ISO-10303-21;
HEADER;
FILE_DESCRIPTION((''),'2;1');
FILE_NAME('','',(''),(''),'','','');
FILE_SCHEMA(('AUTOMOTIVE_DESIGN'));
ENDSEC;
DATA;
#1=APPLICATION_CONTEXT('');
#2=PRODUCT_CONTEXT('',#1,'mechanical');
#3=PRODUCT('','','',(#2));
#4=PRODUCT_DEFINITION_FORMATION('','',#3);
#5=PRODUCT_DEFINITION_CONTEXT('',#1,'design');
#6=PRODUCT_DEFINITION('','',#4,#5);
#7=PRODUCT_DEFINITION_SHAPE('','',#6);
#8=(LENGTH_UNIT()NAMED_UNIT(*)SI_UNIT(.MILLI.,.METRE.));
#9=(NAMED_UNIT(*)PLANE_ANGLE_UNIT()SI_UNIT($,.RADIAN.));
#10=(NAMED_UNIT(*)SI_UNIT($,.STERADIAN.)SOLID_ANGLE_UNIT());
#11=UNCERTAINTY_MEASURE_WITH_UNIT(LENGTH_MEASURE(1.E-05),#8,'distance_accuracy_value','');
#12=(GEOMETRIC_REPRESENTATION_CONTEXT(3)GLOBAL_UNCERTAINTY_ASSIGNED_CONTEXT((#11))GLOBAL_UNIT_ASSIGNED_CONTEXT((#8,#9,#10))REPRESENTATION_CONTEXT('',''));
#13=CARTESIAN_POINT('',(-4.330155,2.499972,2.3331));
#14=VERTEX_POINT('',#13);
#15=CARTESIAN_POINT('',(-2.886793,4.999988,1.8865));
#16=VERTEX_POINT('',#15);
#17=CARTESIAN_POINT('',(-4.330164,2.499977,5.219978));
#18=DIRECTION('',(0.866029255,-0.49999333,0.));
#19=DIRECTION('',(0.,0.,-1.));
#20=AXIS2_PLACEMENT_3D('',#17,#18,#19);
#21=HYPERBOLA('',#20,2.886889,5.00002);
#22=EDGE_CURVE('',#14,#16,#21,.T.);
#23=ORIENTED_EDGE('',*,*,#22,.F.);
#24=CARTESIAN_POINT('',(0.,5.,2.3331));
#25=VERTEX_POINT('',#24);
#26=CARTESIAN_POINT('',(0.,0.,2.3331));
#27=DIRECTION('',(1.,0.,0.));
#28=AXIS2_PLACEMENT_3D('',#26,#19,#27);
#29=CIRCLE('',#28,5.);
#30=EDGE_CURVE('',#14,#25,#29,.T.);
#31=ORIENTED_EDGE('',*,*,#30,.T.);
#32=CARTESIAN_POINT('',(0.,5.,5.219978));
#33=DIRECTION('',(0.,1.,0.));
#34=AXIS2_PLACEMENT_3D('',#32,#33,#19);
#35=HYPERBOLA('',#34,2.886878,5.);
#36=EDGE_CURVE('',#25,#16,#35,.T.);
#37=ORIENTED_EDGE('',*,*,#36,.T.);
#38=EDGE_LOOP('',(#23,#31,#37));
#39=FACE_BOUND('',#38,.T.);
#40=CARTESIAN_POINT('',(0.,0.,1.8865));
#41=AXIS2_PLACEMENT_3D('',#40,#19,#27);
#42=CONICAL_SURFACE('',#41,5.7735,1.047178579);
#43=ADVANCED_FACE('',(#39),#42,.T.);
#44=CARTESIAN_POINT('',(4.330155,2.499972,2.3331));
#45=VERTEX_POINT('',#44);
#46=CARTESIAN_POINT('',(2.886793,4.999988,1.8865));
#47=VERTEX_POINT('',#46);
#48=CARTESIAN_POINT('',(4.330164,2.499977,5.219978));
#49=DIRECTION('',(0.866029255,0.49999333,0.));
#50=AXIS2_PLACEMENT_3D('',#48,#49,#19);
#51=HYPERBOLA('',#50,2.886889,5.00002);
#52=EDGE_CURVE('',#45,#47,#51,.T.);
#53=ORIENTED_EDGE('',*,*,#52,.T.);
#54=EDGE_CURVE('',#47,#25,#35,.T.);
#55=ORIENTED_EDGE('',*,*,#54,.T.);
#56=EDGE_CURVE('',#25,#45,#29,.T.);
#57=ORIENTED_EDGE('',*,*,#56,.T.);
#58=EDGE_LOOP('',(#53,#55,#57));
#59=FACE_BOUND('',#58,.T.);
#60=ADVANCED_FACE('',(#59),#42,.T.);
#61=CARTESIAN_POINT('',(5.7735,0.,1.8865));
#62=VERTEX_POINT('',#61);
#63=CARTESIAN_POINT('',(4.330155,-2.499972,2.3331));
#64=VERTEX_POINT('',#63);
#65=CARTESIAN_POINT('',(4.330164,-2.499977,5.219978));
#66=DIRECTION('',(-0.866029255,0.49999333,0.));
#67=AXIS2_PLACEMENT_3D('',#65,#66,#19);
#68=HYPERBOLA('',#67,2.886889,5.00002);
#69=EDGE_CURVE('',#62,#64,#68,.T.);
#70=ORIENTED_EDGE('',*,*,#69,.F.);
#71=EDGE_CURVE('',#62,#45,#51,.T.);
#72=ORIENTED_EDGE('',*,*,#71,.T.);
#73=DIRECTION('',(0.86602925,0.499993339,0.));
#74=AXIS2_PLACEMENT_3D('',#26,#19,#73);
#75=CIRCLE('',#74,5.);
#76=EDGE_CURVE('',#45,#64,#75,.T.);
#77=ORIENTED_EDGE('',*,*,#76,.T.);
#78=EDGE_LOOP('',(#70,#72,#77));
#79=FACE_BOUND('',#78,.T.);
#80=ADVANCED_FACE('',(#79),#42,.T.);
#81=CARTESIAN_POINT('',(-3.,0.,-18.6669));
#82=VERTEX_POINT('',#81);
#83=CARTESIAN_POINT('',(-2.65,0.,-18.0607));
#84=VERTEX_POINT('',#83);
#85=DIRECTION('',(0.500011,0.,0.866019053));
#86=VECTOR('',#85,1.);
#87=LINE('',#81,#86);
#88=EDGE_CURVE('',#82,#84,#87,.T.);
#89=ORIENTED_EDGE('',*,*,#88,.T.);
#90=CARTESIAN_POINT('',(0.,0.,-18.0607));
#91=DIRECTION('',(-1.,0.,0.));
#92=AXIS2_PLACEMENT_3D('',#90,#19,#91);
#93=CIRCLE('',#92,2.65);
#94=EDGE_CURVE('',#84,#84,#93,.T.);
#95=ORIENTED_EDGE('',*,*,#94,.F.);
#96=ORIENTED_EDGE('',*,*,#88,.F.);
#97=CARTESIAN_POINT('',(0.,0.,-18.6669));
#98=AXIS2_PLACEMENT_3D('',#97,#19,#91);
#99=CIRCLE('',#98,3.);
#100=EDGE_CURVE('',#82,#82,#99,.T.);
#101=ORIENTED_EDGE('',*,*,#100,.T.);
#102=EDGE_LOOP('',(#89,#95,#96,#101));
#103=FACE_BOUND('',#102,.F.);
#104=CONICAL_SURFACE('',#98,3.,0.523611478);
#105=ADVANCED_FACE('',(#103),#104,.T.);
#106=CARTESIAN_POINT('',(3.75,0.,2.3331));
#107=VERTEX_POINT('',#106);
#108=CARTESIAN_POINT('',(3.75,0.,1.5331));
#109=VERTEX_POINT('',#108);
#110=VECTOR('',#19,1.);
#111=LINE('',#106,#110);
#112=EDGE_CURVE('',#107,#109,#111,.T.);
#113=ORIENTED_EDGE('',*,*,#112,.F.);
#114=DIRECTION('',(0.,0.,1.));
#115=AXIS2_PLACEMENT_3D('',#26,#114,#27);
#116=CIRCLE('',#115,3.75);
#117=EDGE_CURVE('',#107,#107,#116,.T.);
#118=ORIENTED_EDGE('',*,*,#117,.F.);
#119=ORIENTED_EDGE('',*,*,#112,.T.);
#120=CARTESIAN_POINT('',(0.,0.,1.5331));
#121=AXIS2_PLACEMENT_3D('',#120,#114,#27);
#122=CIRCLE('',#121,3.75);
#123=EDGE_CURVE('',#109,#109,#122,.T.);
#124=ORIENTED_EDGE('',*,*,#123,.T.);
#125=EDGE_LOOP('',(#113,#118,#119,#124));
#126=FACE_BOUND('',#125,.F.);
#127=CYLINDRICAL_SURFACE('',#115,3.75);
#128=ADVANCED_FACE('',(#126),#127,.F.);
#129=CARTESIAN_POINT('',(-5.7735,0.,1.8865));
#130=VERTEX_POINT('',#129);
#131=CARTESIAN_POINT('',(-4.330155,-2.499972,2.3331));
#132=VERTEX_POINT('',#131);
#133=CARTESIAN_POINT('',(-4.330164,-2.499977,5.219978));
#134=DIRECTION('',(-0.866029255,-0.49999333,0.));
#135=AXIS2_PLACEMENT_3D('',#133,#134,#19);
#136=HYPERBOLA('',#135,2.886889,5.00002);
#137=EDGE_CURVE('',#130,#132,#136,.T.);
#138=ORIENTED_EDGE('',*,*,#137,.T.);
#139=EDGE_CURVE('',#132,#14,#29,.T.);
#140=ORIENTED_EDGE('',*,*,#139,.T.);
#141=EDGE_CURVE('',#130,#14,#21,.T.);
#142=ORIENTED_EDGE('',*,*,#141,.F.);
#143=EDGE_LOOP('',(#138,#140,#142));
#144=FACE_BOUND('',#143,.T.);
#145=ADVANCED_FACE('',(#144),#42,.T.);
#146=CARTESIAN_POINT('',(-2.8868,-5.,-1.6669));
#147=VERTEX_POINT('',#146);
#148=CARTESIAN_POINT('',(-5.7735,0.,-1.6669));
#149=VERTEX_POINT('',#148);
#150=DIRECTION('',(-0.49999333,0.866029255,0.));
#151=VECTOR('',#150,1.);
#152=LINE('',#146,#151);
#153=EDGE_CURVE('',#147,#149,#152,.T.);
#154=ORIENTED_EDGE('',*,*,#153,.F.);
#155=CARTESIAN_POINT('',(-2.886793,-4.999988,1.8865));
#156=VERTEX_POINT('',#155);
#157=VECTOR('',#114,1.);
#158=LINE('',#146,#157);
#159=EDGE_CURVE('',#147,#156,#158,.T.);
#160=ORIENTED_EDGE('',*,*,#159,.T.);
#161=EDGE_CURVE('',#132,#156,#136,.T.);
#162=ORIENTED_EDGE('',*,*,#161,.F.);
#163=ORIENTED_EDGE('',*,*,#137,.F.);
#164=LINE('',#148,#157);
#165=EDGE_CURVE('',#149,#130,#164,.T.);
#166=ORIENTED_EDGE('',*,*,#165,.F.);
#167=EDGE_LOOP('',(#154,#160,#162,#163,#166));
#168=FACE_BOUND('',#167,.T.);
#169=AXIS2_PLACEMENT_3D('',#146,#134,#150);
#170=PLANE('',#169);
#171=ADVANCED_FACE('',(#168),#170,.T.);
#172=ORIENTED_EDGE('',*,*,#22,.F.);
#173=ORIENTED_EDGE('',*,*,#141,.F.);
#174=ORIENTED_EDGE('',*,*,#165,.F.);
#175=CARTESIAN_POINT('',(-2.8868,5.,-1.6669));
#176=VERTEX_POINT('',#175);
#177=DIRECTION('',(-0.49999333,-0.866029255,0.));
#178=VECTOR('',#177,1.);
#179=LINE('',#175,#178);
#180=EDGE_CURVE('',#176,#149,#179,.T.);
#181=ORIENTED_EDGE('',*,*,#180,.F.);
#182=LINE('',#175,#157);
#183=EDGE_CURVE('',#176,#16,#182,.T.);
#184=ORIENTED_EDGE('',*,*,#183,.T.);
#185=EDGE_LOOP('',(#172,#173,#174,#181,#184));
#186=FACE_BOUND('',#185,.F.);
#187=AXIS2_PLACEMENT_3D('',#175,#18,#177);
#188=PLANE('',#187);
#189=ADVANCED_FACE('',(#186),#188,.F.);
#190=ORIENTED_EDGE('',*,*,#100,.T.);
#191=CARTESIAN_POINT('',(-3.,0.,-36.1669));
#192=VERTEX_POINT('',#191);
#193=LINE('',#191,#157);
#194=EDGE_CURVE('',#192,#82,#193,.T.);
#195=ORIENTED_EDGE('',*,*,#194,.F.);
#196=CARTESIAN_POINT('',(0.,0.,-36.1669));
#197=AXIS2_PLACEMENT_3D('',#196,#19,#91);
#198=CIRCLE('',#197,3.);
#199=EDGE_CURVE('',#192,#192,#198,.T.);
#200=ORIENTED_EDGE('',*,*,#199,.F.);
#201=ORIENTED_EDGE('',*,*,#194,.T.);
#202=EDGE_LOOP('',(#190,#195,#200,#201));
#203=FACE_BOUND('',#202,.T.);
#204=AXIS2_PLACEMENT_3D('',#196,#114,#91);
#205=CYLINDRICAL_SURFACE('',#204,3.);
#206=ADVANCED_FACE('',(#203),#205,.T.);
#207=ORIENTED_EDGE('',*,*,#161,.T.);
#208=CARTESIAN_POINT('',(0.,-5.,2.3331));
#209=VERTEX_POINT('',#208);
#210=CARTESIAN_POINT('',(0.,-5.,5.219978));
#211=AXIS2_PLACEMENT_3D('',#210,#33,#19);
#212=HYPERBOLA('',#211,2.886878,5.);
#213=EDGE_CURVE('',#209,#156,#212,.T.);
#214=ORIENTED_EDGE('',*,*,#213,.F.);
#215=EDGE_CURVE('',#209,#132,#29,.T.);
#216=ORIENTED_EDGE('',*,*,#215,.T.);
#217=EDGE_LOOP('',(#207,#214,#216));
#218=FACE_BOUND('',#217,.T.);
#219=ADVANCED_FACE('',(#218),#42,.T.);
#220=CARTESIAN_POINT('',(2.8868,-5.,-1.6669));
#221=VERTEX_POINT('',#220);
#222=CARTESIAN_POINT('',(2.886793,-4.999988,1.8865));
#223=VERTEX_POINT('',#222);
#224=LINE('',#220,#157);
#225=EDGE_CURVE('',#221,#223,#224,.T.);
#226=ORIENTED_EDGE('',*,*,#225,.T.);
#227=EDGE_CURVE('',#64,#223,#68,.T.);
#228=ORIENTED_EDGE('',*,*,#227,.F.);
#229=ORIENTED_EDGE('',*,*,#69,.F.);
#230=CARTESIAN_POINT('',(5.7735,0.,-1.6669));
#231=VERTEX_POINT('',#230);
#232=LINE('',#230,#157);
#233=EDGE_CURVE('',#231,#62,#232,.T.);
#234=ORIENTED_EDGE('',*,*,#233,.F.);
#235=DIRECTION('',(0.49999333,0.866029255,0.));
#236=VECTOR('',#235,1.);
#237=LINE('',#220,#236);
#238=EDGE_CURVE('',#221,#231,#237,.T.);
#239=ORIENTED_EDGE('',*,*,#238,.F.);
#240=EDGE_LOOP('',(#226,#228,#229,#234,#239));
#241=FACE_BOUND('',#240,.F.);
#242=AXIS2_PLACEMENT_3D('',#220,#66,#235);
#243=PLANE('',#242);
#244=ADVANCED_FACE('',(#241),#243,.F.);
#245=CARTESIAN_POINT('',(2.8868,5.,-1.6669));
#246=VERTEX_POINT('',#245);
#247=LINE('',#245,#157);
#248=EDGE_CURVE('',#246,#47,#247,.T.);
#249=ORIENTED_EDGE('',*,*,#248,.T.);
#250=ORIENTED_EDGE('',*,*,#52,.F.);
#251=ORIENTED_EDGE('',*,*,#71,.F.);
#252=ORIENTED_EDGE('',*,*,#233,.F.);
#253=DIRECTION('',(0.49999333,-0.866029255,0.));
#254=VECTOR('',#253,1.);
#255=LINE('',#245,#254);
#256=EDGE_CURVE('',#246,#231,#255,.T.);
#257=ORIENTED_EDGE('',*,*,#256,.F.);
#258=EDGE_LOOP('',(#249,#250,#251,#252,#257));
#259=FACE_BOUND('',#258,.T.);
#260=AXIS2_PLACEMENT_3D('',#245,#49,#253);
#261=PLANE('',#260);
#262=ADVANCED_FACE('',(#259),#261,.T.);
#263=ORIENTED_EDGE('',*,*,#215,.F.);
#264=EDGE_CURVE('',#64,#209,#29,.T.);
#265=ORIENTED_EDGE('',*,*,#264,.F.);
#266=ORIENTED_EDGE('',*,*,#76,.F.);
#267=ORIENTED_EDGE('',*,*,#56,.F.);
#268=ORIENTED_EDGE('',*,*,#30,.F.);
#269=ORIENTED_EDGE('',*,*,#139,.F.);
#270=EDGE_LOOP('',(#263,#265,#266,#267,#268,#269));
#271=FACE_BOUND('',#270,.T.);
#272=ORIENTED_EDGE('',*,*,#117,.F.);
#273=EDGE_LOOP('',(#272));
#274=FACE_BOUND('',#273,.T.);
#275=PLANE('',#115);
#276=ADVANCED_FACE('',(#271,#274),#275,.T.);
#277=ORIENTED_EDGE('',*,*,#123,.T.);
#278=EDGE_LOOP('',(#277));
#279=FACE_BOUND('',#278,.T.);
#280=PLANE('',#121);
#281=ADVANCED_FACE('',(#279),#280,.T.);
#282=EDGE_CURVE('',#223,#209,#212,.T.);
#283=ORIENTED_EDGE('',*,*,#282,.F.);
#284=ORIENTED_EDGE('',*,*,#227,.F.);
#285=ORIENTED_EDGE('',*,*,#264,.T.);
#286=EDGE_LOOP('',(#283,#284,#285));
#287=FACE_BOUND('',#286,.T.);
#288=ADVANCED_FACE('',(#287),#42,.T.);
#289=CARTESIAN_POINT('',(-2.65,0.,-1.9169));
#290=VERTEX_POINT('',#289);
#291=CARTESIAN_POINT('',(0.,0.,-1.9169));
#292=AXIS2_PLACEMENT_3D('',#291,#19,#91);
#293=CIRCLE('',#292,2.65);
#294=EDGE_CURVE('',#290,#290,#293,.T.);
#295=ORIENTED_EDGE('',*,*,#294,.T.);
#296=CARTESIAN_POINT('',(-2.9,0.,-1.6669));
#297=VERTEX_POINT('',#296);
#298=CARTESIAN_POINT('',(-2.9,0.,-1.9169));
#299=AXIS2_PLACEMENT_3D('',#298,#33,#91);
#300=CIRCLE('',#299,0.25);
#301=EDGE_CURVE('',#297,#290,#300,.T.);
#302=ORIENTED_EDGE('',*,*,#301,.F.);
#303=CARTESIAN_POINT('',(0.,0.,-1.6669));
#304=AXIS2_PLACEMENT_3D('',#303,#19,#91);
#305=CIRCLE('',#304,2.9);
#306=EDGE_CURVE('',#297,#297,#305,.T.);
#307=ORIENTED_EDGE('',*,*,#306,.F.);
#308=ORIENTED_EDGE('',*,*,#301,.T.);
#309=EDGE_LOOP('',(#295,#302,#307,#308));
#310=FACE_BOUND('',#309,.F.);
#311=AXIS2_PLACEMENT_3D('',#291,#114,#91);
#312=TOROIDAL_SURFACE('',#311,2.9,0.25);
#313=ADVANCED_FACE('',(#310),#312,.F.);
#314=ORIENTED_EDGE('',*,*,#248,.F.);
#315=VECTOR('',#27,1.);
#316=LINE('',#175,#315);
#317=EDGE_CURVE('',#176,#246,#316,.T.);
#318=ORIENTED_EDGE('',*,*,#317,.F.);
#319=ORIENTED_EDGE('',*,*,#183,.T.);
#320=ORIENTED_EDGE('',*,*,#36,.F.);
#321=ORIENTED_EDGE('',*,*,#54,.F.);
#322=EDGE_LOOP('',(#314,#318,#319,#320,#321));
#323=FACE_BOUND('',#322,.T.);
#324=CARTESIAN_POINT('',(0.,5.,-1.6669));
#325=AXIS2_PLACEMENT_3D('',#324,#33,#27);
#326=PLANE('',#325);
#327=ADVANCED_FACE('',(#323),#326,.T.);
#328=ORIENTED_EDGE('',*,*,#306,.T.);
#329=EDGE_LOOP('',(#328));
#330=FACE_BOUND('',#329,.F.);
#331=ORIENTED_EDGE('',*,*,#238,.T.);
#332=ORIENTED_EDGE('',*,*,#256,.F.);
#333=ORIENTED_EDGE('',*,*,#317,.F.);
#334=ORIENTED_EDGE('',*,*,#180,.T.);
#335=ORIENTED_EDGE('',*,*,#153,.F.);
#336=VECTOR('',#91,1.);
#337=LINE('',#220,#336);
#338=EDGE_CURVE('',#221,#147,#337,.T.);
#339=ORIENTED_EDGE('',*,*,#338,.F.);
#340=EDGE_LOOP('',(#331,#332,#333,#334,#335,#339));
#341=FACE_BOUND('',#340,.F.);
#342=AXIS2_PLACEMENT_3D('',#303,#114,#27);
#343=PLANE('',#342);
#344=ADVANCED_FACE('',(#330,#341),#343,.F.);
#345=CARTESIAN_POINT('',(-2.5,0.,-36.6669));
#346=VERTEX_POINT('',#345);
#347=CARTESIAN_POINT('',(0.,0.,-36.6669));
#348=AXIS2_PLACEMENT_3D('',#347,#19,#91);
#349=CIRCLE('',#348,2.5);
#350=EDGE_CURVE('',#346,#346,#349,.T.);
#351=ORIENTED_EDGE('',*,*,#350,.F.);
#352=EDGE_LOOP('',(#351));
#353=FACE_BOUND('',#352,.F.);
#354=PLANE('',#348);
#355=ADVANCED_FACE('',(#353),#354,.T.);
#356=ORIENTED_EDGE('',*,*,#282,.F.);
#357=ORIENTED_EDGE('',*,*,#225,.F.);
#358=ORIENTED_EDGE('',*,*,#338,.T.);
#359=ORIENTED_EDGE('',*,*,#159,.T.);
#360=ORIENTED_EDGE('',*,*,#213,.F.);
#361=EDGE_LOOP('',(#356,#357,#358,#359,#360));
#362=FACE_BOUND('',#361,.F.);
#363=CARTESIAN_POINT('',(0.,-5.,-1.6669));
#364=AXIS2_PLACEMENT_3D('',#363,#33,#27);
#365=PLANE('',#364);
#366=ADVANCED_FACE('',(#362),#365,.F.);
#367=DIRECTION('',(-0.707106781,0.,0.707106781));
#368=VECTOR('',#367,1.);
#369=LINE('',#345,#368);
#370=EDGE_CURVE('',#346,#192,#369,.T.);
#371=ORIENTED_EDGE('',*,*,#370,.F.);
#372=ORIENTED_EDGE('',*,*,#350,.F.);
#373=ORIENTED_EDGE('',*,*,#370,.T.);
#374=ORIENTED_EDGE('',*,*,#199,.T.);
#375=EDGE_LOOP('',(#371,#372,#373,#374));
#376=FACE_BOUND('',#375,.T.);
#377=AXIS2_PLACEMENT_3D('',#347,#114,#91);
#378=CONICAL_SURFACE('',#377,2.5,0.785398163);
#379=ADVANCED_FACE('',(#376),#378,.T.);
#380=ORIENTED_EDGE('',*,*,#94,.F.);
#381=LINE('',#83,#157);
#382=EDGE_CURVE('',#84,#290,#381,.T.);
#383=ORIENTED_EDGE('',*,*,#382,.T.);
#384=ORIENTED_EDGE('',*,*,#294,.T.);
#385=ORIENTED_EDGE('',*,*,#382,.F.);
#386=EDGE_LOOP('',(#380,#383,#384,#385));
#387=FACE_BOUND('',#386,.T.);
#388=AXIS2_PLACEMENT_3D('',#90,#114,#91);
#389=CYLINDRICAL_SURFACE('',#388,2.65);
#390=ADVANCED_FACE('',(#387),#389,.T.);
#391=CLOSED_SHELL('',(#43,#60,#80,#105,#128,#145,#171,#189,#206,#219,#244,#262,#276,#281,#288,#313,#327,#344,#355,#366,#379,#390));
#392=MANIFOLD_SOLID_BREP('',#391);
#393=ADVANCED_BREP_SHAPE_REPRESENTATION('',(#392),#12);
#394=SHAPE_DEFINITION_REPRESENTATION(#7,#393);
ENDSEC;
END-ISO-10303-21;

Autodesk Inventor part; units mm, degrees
ref_plane "YZ Plane" through (0, 0, 0) normal (1, 0, 0) x (0, 1, 0)
sketch "Sketch2" plane through (0, 0, 0) normal (0, 1, 0) x (-1, 0, 0)
  line L0 (0, -1.6669) -> (0, -36.6669)
  line L1 (0, -36.6669) -> (2.5, -36.6669)
  line L2 (3, -36.1669) -> (3, -18.6669)
  line L3 (3, -18.6669) -> (2.65, -18.0607)
  line L4 (2.65, -18.0607) -> (2.65, -1.6669)
  line L5 (2.65, -1.6669) -> (0, -1.6669)
  line L6 (2.5, -36.6669) -> (3, -36.1669)
  line L7 (3, -36.6669) -> (3, -37.374)
  line L8 (0, -44.5155) -> (0, 5.4745) projected
  dimension "Ds" = 5.3
  dimension "NND" = 6
  dimension "b" = 18
  dimension "d3" = 30
  dimension "d5" = 45
  dimension "PTC" = 1
  dimension "NLG" = 35
revolve "Revolution1" add sketch "Sketch2" angle 360 about axis through (0, 0, -1.6669) along (0, 0, -1)
sketch "Sketch3" plane through (0, 0, -1.6669) normal (0, 0, 1) x (1, 0, 0)
  circle A0 centre (0, 0) radius 2.65 projected
  line L0 (0, 5) -> (2.8868, 5)
  line L1 (2.8868, 5) -> (5.7735, 0)
  line L2 (5.7735, 0) -> (0, 0)
  line L3 (0, 0) -> (0, 5)
  line L4 (0, 5) -> (-2.8868, 5)
  line L5 (-2.8868, 5) -> (-5.7735, 0)
  line L6 (0, -5) -> (2.8868, -5)
  line L7 (2.8868, -5) -> (5.7735, 0)
  line L8 (-2.8868, -5) -> (-5.7735, 0)
  line L9 (0, -5) -> (-2.8868, -5)
  dimension "d9" = 60
  dimension "ParS" = 10
  dimension "msp_d11" = 10
extrude "Extrusion1" add sketch "Sketch3" along normal blind 4
sketch "Sketch4" plane through (0, 0, 0) normal (0, 1, 0) x (-1, 0, 0)
  line L0 (-5, 2.3331) -> (-5.7735, 2.3331)
  line L1 (-5.7735, 2.3331) -> (-5.7735, 1.8865)
  line L2 (-5.7735, 1.8865) -> (-5, 2.3331)
  line L3 (0, -7.5254) -> (0, 33.4838) projected
  line L4 (0, 27.6253) -> (0, 27.1787)
  line L5 (-5.7735, -1.6669) -> (-5.7735, 2.3331) projected
  line L6 (-2.8868, 2.3331) -> (-5.7735, 2.3331) projected
  dimension "d14" = 30
  dimension "msp_d15" = 10
revolve "Revolution2" cut sketch "Sketch4" angle 360 about axis through (0, 0, 27.6253) along (0, 0, -1)
sketch "Sketch5" plane through (0, 0, 2.3331) normal (0, 0, 1) x (1, 0, 0)
  arc A0 (4.3301, 2.5) -> (0, 5) centre (0, 0) ccw projected
  circle A1 centre (0, 0) radius 3.75
  dimension "d27" = 7.5
extrude "Extrusion2" cut sketch "Sketch5" against normal blind 0.8
thread "Thread1" size "M6x1" class "6g" standard "ISO Metric profile" full length
ref_plane "MSC_PF1" through (0, 0, 0) normal (0, 1, 0) x (-1, 0, 0)
ref_plane "MSC_PT1" through (0, 0, -1.6669) normal (0, 0, -1) x (-1, 0, 0)
fillet "Fillet1" radius 0.25 1 edges at (2.65, 0, -1.6669)
equation "\"msp_d11\" = ParS"
equation "\"msp_d15\" = ParS"
equation "\"d27\" = 0.75 * ParS"
equation "\"d28\" = 0.2 * ParK"
equation "\"d30\" = r"
equation "\"msp_d17\" = b"
equation "\"r\" = 0.25"
equation "\"THREADDIA\" = NND"
equation "\"ParK\" = 4"
properties part number "ISO 4015 - M6 x 35" material "Stainless Steel, 440C"
